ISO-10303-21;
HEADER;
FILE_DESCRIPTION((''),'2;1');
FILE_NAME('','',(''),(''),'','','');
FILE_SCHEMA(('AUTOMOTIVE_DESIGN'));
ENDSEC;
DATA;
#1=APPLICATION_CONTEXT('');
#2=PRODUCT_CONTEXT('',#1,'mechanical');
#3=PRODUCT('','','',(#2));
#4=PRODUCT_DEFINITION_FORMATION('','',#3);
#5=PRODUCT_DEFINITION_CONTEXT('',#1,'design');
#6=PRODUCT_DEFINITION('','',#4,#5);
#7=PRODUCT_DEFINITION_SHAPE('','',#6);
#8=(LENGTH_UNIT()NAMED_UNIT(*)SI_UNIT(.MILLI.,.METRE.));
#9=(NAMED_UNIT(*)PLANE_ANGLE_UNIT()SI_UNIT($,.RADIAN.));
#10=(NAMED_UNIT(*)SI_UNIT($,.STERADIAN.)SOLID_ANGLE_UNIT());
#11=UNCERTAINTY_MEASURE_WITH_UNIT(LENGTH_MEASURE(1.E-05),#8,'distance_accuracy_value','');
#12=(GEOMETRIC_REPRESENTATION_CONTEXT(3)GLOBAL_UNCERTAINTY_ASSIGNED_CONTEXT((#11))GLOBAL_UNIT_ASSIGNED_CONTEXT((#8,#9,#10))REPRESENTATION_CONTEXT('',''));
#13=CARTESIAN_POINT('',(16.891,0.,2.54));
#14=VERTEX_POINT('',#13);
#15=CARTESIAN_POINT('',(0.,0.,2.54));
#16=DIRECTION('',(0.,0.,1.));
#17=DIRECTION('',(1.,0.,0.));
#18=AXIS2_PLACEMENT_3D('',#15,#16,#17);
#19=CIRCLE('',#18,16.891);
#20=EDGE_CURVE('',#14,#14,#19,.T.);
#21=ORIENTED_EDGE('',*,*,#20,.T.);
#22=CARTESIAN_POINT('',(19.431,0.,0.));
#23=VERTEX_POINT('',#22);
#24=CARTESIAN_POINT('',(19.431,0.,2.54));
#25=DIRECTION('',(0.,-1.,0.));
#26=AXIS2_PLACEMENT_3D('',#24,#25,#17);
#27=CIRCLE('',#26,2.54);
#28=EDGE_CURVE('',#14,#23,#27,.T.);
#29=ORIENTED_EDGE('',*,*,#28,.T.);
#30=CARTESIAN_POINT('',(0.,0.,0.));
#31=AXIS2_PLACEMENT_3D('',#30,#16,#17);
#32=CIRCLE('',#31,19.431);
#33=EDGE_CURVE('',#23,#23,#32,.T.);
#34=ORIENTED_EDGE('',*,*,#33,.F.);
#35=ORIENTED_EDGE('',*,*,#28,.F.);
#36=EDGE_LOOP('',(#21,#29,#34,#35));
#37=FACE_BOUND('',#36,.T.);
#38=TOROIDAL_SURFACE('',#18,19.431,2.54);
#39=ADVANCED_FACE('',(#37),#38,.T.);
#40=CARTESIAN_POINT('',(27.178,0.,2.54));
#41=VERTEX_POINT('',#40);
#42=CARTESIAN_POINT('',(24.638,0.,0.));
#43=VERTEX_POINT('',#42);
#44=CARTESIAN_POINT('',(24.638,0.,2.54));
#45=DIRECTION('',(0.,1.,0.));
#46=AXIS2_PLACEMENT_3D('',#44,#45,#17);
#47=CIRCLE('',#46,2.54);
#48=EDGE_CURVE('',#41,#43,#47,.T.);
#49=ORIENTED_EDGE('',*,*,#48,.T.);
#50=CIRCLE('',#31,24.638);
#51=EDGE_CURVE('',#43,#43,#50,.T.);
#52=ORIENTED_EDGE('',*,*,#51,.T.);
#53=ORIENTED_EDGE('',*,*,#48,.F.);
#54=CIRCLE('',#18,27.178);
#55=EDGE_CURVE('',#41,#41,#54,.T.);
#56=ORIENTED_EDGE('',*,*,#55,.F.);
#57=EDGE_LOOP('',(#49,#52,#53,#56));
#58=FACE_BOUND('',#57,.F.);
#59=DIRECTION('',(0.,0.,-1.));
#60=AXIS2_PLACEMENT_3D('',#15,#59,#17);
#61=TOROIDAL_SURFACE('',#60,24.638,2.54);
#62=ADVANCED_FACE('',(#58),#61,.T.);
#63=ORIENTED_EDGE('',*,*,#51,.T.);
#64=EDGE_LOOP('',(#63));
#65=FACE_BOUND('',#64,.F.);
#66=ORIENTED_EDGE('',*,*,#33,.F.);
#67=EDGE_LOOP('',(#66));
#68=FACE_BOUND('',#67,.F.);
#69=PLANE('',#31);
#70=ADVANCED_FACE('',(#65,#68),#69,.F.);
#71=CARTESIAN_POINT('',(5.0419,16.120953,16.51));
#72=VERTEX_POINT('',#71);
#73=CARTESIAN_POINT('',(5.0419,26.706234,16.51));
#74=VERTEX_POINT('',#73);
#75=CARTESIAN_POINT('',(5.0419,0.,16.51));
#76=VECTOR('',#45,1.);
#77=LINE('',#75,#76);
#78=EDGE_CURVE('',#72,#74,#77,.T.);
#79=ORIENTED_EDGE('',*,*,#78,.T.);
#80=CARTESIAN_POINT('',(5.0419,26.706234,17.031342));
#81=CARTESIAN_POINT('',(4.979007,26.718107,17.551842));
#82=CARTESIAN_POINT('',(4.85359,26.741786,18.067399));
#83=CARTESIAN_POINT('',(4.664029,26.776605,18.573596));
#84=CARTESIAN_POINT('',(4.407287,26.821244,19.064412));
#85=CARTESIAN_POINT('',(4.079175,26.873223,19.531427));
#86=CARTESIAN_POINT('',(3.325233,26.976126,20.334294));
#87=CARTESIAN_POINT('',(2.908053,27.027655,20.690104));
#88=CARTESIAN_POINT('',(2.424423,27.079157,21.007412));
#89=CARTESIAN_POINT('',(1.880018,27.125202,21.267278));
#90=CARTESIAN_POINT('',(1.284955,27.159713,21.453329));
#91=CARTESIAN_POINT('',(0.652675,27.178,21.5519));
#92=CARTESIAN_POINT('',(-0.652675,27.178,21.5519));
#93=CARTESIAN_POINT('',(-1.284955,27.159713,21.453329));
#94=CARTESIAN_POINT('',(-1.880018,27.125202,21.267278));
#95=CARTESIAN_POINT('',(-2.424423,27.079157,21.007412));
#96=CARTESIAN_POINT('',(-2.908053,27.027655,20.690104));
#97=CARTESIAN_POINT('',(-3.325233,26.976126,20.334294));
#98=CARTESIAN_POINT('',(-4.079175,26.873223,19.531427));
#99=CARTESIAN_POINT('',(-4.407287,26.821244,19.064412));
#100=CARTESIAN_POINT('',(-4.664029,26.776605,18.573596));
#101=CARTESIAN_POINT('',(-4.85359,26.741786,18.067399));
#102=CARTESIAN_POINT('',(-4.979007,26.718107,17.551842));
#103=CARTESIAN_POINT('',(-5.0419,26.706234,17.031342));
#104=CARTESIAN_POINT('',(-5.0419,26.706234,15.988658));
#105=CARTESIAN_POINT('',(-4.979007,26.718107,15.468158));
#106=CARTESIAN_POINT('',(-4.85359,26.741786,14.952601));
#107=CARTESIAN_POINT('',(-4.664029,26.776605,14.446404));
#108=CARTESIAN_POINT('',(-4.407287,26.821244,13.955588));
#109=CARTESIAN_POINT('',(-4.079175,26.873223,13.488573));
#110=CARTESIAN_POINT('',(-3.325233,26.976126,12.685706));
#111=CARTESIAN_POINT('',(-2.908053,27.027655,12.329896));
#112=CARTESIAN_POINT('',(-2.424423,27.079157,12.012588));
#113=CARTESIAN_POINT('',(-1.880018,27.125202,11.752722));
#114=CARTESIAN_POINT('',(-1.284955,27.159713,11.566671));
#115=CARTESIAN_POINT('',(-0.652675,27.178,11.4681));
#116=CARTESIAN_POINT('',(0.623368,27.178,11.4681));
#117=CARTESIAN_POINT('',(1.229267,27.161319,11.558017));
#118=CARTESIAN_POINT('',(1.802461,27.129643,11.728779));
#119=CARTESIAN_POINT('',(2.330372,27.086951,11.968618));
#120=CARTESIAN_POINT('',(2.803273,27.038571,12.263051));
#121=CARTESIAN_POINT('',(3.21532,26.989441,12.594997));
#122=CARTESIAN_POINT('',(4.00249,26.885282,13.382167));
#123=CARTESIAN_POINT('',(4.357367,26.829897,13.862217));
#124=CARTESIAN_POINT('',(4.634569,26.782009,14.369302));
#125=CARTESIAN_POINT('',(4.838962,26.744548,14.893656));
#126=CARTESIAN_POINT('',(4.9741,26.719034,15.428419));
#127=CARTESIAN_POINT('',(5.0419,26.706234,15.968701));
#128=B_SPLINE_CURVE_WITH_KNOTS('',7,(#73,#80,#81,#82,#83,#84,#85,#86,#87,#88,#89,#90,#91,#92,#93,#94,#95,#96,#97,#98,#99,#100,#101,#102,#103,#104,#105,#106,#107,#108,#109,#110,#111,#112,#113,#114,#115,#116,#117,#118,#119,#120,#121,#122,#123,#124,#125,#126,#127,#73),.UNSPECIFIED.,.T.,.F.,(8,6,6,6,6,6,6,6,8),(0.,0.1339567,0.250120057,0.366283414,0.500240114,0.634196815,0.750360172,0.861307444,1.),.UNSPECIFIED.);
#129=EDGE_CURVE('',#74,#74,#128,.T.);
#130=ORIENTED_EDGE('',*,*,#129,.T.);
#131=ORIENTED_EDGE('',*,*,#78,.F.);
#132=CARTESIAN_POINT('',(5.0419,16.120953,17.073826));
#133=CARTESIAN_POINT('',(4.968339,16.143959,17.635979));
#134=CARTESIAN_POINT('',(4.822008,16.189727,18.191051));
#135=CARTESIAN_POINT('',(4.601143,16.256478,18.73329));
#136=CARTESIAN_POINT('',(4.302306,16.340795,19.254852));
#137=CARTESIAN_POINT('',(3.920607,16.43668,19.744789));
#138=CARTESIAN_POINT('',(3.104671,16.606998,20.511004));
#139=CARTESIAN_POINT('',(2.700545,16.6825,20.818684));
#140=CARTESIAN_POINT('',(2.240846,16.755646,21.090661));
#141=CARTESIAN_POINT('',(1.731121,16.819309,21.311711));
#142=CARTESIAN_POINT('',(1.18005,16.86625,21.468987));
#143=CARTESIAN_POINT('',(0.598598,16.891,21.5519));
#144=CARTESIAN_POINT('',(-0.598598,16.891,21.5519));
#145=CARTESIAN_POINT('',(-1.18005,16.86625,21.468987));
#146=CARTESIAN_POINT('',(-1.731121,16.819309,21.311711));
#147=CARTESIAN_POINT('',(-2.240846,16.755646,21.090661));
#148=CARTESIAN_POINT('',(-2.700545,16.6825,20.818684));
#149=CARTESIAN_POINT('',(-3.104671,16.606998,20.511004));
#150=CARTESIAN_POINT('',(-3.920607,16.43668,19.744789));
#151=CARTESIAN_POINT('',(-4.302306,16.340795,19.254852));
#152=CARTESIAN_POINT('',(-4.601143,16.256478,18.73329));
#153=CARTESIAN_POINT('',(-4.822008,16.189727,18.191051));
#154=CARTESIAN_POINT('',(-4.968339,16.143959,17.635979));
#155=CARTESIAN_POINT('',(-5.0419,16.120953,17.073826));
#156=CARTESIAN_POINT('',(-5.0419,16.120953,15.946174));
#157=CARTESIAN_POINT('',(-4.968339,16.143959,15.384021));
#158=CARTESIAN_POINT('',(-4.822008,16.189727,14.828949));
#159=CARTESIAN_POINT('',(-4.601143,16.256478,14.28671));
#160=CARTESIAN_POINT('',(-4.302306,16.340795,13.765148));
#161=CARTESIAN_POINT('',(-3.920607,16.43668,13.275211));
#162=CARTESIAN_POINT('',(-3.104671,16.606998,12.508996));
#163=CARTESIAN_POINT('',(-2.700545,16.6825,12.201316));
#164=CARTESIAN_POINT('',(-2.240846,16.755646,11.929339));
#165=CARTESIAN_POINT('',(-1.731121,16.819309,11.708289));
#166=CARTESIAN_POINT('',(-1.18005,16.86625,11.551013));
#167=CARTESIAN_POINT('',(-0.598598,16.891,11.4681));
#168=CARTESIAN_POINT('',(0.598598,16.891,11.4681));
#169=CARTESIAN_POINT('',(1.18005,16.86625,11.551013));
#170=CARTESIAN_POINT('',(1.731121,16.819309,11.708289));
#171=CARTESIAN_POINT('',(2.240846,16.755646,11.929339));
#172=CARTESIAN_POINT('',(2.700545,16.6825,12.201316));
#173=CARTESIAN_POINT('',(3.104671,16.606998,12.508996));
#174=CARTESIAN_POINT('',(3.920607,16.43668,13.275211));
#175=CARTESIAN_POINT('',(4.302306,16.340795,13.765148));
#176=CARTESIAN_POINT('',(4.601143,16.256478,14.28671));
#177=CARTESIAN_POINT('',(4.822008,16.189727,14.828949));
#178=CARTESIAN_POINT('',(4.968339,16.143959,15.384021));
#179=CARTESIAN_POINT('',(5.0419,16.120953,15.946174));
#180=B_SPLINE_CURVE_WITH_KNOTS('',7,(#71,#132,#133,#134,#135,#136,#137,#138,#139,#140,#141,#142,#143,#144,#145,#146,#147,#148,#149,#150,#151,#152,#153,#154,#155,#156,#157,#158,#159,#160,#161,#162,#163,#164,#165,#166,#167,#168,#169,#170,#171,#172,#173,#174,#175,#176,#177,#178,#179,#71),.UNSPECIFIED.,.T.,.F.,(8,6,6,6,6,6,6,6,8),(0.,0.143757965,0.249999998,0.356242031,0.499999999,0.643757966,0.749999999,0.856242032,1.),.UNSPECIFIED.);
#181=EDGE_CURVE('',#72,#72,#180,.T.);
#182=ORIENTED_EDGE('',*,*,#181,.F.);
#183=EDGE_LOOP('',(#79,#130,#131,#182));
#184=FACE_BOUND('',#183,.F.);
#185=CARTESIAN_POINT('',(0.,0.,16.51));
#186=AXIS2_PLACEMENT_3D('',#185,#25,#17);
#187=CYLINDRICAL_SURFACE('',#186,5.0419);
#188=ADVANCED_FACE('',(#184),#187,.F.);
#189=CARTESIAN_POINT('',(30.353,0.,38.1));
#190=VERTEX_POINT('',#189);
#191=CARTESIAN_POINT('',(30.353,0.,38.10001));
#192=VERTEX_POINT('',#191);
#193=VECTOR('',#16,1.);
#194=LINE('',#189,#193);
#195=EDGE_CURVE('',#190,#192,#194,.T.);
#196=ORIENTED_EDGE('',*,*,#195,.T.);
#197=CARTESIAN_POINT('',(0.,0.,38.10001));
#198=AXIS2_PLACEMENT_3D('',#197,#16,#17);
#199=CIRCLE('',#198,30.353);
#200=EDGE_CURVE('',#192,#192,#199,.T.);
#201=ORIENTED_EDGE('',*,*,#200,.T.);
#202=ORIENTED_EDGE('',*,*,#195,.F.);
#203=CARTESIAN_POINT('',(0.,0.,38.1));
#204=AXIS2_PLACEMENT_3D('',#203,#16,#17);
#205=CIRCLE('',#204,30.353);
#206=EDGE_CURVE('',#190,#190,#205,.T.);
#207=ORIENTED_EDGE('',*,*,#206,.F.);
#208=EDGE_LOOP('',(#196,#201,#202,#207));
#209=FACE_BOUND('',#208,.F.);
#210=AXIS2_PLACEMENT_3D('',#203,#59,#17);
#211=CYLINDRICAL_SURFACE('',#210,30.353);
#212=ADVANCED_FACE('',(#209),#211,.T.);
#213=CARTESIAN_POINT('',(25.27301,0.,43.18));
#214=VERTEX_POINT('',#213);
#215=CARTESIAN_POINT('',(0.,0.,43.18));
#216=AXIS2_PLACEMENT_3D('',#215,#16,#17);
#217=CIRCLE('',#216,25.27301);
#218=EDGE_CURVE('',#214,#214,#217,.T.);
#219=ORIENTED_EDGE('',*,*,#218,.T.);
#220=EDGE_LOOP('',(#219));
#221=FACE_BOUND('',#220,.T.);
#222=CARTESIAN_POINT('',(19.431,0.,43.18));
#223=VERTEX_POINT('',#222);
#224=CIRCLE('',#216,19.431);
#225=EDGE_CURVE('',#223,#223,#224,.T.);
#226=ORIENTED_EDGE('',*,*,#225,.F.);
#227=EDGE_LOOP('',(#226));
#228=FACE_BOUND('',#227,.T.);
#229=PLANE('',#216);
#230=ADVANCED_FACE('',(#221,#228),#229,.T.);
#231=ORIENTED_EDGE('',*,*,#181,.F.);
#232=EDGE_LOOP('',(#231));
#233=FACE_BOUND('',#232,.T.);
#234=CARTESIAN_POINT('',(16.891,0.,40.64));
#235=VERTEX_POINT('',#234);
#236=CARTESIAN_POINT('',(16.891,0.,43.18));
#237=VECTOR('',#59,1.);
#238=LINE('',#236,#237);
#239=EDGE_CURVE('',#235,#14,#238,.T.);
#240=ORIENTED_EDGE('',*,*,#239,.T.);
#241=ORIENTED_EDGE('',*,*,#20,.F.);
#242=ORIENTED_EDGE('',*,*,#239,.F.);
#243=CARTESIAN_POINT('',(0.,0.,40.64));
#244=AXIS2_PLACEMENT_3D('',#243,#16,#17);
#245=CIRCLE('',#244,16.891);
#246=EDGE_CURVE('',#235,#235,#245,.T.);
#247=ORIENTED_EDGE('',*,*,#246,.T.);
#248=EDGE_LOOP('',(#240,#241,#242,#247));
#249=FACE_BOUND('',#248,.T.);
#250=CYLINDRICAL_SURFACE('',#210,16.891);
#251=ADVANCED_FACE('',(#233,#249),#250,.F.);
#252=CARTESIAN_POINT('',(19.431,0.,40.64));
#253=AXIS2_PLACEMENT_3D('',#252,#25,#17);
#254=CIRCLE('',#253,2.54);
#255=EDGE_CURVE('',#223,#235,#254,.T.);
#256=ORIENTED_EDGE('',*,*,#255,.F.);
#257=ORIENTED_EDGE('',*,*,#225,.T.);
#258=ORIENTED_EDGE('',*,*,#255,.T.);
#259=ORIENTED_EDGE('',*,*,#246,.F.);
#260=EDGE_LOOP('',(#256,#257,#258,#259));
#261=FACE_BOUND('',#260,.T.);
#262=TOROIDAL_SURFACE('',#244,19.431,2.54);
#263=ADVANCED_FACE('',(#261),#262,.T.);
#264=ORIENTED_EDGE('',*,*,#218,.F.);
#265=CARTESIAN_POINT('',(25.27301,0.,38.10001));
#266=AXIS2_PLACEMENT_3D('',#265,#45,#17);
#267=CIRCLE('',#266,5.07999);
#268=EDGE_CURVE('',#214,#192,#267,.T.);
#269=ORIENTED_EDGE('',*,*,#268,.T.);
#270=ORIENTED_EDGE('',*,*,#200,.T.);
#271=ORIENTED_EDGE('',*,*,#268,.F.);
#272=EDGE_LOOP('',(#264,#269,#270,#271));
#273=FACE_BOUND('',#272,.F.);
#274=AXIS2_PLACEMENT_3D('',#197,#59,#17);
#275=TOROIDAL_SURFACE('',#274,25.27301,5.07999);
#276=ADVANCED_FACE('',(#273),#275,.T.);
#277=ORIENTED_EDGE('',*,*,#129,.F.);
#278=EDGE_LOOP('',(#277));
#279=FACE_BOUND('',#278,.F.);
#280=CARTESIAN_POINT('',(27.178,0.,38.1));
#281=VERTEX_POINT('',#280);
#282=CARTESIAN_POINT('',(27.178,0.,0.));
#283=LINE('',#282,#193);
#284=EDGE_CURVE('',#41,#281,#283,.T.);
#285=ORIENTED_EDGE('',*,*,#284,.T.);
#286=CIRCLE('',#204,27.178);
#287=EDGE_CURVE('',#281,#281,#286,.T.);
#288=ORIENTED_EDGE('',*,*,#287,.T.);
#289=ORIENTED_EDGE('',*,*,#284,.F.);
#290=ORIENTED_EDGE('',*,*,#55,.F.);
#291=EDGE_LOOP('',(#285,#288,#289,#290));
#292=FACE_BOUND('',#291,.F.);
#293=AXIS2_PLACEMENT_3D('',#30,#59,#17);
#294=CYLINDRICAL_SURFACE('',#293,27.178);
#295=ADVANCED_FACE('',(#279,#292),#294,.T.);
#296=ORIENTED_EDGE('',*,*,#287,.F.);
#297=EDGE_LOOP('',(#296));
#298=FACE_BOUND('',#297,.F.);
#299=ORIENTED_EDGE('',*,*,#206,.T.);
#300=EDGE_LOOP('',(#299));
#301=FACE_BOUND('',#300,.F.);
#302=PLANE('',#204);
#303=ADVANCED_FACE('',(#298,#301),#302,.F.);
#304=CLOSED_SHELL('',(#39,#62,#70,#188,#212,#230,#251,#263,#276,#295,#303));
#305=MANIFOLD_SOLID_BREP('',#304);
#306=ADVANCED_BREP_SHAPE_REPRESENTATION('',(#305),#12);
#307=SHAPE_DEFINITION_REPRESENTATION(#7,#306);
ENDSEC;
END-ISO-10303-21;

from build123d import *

# Parameters (mm, degrees)
F0_R     = 27.178
F0_R_2   = 16.891
F1_DEPTH = 38.1
F2_R     = 30.353
F2_R_2   = 27.178
F2_R_3   = 16.891
F3_DEPTH = 5.08
F5_D     = 10.0838
F5_DEPTH = 30.354
F6_R     = 2.54
F7_R     = 5.07999


# Not quite as in the source:
# - a fillet or chamfer is up to 0.001 mm smaller than in the source, because OpenCascade refuses the exact size


with BuildPart() as f1:
    # F0 (on Top) → F1 (new body)
    with BuildSketch(Plane.XY):
        Circle(F0_R)
        Circle(F0_R_2, mode=Mode.SUBTRACT)
    extrude(amount=F1_DEPTH)

    # F2 (on face) → F3 (join)
    with BuildSketch(Plane.XY.offset(38.1)):
        Circle(F2_R)
        Circle(F2_R_2, mode=Mode.SUBTRACT)
        Circle(F2_R_2)
        Circle(F2_R_3, mode=Mode.SUBTRACT)
    extrude(amount=F3_DEPTH)

    # F5 (through all, one way)
    with BuildSketch(Plane.XZ):
        with Locations((0, 16.51)):
            Circle(F5_D / 2)
    extrude(amount=-F5_DEPTH, mode=Mode.SUBTRACT)

    # F6
    f6_edges = [f1.edges().sort_by_distance(p)[0] for p in [
        (-16.891, 0, 0),
        (-27.178, 0, 0),
        (-16.891, 0, 43.18),
    ]]
    fillet(f6_edges, radius=F6_R)

    # F7 (radius 5.08 in the source; OpenCascade refuses exactly that, so slightly less here)
    f7_edges = [f1.edges().sort_by_distance(p)[0] for p in [
        (-30.353, 0, 43.18),
    ]]
    fillet(f7_edges, radius=F7_R)


solid = f1.part
